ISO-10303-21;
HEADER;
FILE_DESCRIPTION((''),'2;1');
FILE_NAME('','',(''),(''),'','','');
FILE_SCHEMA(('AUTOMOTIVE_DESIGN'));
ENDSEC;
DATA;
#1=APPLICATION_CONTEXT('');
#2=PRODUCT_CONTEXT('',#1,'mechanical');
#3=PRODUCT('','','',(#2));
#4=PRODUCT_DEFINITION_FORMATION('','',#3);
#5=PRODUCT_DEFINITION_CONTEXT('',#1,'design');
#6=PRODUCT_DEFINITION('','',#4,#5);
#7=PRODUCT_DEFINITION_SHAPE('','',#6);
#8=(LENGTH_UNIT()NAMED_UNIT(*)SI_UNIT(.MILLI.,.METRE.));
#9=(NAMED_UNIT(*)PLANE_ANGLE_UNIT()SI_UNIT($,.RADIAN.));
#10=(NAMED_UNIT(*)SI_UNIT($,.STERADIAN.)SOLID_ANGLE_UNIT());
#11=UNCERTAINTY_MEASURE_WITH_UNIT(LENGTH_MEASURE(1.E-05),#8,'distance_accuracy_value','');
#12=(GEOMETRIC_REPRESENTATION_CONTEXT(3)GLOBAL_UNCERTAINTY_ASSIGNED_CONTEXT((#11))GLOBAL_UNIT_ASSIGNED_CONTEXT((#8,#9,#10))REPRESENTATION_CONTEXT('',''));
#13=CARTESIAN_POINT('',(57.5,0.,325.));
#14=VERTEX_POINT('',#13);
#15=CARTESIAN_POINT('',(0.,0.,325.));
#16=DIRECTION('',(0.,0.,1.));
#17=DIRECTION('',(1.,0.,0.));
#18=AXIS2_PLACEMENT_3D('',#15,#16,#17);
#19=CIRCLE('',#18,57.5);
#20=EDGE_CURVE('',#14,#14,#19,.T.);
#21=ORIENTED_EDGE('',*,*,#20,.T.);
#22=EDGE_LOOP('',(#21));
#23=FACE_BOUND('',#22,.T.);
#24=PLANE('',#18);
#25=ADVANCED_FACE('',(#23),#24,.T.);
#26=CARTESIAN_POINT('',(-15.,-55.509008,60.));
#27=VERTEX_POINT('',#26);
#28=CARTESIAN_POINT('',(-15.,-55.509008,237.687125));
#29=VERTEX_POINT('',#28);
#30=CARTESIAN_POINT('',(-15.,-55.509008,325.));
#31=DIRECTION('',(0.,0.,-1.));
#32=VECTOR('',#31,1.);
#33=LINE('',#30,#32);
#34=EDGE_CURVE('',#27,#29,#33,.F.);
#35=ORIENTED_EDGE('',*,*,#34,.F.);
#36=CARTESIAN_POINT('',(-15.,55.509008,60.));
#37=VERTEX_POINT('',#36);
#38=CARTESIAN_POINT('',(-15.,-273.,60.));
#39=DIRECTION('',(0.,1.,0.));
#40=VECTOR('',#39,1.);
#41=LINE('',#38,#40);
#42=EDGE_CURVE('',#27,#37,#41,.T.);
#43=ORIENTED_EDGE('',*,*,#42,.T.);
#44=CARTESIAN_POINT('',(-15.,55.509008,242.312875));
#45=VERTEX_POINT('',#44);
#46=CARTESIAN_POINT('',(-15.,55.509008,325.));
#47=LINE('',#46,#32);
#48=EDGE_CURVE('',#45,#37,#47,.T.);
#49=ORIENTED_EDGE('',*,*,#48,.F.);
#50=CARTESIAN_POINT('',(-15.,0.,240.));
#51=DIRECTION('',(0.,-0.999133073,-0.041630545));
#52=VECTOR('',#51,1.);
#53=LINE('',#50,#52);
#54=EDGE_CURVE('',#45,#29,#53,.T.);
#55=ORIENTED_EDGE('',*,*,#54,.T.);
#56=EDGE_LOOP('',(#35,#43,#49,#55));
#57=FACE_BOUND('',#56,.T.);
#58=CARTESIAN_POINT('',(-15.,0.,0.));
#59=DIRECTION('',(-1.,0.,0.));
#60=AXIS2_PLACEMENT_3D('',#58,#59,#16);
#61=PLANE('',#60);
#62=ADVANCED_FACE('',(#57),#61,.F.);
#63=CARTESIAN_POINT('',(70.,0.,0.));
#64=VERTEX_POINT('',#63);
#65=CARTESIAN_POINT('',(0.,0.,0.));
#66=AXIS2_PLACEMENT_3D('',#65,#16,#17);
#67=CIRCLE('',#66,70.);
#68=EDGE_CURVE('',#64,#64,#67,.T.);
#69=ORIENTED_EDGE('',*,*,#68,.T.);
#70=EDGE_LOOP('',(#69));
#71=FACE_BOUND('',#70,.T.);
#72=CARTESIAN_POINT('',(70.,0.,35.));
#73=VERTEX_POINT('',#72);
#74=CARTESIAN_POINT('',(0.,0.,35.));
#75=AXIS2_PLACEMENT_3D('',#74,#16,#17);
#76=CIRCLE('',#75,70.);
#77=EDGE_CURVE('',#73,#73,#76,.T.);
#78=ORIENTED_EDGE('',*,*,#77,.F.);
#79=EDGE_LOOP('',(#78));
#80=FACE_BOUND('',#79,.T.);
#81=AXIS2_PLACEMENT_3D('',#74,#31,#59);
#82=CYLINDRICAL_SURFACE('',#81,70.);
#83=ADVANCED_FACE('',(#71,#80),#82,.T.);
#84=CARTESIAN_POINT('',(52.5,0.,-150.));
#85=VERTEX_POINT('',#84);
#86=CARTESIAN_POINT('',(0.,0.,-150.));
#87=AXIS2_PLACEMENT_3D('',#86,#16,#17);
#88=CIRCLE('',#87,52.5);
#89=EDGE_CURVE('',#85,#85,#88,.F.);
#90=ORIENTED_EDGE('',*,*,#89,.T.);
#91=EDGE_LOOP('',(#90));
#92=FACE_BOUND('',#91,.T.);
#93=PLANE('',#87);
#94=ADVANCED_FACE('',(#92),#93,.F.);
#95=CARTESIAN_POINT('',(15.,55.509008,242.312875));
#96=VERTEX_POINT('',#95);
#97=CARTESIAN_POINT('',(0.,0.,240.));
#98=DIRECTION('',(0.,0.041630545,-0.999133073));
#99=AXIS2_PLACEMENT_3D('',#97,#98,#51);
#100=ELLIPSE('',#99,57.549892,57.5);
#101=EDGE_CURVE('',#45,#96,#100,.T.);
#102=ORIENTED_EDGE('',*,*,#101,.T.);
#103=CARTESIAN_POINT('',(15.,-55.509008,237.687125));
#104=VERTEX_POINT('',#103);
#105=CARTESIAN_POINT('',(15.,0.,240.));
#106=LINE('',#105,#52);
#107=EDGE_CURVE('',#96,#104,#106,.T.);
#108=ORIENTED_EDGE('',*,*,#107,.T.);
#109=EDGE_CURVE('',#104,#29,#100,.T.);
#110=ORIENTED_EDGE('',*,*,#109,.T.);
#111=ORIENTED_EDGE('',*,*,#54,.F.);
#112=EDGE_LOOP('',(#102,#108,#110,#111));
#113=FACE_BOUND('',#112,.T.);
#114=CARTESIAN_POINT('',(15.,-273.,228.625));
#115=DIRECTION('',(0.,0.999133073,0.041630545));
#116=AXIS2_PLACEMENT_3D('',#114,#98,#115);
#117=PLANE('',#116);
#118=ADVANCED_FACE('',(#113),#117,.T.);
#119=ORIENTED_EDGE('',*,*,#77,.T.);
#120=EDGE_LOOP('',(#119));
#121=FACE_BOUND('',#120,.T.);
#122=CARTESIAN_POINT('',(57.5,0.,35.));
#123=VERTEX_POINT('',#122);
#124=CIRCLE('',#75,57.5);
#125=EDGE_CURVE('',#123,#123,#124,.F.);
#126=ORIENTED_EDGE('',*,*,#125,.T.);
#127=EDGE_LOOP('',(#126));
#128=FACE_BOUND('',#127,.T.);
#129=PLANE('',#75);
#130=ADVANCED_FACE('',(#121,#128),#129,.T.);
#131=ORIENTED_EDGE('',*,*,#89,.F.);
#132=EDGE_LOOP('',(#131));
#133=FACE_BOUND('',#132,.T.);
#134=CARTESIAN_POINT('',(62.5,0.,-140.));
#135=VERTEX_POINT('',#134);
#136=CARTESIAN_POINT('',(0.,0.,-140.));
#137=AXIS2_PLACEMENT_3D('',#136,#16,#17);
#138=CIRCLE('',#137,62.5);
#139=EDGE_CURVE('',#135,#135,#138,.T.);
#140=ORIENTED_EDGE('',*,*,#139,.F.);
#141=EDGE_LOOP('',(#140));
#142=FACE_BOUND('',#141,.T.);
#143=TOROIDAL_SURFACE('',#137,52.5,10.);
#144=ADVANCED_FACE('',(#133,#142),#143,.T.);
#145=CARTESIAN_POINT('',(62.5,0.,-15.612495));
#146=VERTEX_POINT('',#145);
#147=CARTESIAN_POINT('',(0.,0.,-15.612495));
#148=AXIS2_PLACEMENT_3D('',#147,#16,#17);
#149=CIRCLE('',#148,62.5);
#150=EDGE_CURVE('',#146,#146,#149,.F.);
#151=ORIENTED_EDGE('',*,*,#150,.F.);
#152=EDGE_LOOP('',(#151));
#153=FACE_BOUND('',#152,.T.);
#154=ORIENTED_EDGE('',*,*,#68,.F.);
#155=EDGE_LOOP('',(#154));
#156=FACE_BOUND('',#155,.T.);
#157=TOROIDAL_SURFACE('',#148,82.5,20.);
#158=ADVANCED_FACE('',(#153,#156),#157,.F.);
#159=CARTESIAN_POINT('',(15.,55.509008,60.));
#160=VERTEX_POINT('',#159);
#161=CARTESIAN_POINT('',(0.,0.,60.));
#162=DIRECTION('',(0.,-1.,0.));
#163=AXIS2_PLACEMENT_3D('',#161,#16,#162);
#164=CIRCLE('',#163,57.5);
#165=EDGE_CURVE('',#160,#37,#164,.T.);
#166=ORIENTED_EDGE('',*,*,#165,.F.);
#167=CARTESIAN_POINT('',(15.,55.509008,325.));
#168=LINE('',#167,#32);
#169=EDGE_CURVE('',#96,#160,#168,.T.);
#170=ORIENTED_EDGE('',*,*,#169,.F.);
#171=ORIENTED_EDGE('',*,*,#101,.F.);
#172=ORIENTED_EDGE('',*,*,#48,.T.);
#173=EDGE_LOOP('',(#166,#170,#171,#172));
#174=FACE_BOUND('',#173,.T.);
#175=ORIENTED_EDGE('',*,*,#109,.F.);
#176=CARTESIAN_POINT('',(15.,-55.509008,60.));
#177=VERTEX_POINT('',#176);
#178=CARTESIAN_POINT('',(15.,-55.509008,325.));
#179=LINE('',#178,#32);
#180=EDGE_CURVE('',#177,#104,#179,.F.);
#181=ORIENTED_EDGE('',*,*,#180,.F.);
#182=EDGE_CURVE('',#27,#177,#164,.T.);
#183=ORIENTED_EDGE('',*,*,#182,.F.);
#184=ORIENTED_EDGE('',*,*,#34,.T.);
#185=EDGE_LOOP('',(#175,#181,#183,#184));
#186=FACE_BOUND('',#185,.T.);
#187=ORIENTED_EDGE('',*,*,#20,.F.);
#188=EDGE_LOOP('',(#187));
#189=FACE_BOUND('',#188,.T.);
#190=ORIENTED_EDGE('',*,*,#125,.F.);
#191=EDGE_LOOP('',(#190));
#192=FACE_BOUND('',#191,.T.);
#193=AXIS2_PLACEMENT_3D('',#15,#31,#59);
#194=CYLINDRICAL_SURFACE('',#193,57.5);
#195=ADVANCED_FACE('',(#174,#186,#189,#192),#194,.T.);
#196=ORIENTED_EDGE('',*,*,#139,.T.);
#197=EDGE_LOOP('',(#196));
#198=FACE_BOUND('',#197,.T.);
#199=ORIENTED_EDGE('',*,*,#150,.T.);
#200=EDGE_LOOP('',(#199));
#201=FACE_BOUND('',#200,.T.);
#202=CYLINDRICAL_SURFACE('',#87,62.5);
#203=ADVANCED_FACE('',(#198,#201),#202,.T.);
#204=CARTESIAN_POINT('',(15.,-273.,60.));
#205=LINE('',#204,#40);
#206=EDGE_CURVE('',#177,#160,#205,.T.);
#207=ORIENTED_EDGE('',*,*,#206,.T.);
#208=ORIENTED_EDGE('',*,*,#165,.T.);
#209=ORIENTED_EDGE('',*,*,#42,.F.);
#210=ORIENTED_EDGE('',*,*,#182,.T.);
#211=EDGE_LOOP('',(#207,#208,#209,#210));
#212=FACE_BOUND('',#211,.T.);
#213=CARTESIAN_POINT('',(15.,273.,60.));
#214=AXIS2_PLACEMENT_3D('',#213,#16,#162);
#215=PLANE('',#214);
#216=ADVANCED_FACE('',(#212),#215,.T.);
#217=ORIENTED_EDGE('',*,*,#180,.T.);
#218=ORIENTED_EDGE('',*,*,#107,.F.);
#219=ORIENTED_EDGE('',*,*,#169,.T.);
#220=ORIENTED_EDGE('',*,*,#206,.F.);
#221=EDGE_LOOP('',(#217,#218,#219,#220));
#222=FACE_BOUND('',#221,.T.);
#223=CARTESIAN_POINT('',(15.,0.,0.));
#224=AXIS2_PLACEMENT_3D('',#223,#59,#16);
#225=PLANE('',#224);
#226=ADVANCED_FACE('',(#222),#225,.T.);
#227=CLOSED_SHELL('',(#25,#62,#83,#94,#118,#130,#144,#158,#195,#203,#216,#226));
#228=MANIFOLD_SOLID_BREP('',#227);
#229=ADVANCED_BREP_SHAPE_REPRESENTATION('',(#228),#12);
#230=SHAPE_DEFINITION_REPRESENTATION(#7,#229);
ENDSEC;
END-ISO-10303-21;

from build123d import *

# Parameters (mm, degrees)
SKETCH1_R               = 70
BOSS_EXTRUDE1_DEPTH     = 35
SKETCH2_R               = 62.5
BOSS_EXTRUDE2_DEPTH     = 150
FILLET1_R               = 20
SKETCH3_R               = 57.5
BOSS_EXTRUDE3_DEPTH     = 325
CUT_EXTRUDE1_DEPTH      = 15
CUT_EXTRUDE1_DEPTH_BACK = 15
FILLET2_R               = 10


with BuildPart() as part:
    # Sketch1 → Boss-Extrude1 (new body)
    with BuildSketch(Plane.XY):
        Circle(SKETCH1_R)
    extrude(amount=BOSS_EXTRUDE1_DEPTH)

    # Sketch2 → Boss-Extrude2 (add)
    with BuildSketch(Plane.XY):
        Circle(SKETCH2_R)
    extrude(amount=-BOSS_EXTRUDE2_DEPTH)

    # Fillet1
    # the kernel refuses this fillet: 20 mm, written as the material it adds along each edge
    with BuildSketch(Plane(origin=(0, 0, 0), x_dir=(1, 0, 0), z_dir=(0, -1, 0))) as fillet1_piece_1:
        with BuildLine():
            CenterArc((82.5, -15.612494996), FILLET1_R, 128.682187453, 51.317812547)
            Line((62.5, -15.612494996), (62.1, -15.612494996))
            Line((62.1, -15.612494996), (62.1, 0))
            Line((62.1, 0), (62.5, 0.4))
            ThreePointArc((62.5, 0.4), (66.25, 0.4), (69.75, 0.3122499))
            Line((69.75, 0.3122499), (70, 0))
        make_face()
    revolve(axis=Axis((0, 0, 0), (0, 0, 1)))

    # Sketch3 → Boss-Extrude3 (add)
    with BuildSketch(Plane.XY):
        Circle(SKETCH3_R)
    extrude(amount=BOSS_EXTRUDE3_DEPTH)

    # Sketch4 → Cut-Extrude1 (cut, two sides: drawn at the far end of the back side and taken through both)
    with BuildSketch(Plane(origin=(0, 0, 0), x_dir=(0, 0, -1), z_dir=(1, 0, 0)).offset(-CUT_EXTRUDE1_DEPTH_BACK)):
        Polygon((-240, 0), (-251.375, 273), (-60, 273), (-60, 0), (-60, -273), (-228.625, -273), align=None)
    extrude(amount=CUT_EXTRUDE1_DEPTH + CUT_EXTRUDE1_DEPTH_BACK, mode=Mode.SUBTRACT)

    # Fillet2
    fillet2_edges = [part.edges().sort_by_distance(p)[0] for p in [
        (-62.5, 0, -150),
    ]]
    fillet(fillet2_edges, radius=FILLET2_R)


solid = part.part
